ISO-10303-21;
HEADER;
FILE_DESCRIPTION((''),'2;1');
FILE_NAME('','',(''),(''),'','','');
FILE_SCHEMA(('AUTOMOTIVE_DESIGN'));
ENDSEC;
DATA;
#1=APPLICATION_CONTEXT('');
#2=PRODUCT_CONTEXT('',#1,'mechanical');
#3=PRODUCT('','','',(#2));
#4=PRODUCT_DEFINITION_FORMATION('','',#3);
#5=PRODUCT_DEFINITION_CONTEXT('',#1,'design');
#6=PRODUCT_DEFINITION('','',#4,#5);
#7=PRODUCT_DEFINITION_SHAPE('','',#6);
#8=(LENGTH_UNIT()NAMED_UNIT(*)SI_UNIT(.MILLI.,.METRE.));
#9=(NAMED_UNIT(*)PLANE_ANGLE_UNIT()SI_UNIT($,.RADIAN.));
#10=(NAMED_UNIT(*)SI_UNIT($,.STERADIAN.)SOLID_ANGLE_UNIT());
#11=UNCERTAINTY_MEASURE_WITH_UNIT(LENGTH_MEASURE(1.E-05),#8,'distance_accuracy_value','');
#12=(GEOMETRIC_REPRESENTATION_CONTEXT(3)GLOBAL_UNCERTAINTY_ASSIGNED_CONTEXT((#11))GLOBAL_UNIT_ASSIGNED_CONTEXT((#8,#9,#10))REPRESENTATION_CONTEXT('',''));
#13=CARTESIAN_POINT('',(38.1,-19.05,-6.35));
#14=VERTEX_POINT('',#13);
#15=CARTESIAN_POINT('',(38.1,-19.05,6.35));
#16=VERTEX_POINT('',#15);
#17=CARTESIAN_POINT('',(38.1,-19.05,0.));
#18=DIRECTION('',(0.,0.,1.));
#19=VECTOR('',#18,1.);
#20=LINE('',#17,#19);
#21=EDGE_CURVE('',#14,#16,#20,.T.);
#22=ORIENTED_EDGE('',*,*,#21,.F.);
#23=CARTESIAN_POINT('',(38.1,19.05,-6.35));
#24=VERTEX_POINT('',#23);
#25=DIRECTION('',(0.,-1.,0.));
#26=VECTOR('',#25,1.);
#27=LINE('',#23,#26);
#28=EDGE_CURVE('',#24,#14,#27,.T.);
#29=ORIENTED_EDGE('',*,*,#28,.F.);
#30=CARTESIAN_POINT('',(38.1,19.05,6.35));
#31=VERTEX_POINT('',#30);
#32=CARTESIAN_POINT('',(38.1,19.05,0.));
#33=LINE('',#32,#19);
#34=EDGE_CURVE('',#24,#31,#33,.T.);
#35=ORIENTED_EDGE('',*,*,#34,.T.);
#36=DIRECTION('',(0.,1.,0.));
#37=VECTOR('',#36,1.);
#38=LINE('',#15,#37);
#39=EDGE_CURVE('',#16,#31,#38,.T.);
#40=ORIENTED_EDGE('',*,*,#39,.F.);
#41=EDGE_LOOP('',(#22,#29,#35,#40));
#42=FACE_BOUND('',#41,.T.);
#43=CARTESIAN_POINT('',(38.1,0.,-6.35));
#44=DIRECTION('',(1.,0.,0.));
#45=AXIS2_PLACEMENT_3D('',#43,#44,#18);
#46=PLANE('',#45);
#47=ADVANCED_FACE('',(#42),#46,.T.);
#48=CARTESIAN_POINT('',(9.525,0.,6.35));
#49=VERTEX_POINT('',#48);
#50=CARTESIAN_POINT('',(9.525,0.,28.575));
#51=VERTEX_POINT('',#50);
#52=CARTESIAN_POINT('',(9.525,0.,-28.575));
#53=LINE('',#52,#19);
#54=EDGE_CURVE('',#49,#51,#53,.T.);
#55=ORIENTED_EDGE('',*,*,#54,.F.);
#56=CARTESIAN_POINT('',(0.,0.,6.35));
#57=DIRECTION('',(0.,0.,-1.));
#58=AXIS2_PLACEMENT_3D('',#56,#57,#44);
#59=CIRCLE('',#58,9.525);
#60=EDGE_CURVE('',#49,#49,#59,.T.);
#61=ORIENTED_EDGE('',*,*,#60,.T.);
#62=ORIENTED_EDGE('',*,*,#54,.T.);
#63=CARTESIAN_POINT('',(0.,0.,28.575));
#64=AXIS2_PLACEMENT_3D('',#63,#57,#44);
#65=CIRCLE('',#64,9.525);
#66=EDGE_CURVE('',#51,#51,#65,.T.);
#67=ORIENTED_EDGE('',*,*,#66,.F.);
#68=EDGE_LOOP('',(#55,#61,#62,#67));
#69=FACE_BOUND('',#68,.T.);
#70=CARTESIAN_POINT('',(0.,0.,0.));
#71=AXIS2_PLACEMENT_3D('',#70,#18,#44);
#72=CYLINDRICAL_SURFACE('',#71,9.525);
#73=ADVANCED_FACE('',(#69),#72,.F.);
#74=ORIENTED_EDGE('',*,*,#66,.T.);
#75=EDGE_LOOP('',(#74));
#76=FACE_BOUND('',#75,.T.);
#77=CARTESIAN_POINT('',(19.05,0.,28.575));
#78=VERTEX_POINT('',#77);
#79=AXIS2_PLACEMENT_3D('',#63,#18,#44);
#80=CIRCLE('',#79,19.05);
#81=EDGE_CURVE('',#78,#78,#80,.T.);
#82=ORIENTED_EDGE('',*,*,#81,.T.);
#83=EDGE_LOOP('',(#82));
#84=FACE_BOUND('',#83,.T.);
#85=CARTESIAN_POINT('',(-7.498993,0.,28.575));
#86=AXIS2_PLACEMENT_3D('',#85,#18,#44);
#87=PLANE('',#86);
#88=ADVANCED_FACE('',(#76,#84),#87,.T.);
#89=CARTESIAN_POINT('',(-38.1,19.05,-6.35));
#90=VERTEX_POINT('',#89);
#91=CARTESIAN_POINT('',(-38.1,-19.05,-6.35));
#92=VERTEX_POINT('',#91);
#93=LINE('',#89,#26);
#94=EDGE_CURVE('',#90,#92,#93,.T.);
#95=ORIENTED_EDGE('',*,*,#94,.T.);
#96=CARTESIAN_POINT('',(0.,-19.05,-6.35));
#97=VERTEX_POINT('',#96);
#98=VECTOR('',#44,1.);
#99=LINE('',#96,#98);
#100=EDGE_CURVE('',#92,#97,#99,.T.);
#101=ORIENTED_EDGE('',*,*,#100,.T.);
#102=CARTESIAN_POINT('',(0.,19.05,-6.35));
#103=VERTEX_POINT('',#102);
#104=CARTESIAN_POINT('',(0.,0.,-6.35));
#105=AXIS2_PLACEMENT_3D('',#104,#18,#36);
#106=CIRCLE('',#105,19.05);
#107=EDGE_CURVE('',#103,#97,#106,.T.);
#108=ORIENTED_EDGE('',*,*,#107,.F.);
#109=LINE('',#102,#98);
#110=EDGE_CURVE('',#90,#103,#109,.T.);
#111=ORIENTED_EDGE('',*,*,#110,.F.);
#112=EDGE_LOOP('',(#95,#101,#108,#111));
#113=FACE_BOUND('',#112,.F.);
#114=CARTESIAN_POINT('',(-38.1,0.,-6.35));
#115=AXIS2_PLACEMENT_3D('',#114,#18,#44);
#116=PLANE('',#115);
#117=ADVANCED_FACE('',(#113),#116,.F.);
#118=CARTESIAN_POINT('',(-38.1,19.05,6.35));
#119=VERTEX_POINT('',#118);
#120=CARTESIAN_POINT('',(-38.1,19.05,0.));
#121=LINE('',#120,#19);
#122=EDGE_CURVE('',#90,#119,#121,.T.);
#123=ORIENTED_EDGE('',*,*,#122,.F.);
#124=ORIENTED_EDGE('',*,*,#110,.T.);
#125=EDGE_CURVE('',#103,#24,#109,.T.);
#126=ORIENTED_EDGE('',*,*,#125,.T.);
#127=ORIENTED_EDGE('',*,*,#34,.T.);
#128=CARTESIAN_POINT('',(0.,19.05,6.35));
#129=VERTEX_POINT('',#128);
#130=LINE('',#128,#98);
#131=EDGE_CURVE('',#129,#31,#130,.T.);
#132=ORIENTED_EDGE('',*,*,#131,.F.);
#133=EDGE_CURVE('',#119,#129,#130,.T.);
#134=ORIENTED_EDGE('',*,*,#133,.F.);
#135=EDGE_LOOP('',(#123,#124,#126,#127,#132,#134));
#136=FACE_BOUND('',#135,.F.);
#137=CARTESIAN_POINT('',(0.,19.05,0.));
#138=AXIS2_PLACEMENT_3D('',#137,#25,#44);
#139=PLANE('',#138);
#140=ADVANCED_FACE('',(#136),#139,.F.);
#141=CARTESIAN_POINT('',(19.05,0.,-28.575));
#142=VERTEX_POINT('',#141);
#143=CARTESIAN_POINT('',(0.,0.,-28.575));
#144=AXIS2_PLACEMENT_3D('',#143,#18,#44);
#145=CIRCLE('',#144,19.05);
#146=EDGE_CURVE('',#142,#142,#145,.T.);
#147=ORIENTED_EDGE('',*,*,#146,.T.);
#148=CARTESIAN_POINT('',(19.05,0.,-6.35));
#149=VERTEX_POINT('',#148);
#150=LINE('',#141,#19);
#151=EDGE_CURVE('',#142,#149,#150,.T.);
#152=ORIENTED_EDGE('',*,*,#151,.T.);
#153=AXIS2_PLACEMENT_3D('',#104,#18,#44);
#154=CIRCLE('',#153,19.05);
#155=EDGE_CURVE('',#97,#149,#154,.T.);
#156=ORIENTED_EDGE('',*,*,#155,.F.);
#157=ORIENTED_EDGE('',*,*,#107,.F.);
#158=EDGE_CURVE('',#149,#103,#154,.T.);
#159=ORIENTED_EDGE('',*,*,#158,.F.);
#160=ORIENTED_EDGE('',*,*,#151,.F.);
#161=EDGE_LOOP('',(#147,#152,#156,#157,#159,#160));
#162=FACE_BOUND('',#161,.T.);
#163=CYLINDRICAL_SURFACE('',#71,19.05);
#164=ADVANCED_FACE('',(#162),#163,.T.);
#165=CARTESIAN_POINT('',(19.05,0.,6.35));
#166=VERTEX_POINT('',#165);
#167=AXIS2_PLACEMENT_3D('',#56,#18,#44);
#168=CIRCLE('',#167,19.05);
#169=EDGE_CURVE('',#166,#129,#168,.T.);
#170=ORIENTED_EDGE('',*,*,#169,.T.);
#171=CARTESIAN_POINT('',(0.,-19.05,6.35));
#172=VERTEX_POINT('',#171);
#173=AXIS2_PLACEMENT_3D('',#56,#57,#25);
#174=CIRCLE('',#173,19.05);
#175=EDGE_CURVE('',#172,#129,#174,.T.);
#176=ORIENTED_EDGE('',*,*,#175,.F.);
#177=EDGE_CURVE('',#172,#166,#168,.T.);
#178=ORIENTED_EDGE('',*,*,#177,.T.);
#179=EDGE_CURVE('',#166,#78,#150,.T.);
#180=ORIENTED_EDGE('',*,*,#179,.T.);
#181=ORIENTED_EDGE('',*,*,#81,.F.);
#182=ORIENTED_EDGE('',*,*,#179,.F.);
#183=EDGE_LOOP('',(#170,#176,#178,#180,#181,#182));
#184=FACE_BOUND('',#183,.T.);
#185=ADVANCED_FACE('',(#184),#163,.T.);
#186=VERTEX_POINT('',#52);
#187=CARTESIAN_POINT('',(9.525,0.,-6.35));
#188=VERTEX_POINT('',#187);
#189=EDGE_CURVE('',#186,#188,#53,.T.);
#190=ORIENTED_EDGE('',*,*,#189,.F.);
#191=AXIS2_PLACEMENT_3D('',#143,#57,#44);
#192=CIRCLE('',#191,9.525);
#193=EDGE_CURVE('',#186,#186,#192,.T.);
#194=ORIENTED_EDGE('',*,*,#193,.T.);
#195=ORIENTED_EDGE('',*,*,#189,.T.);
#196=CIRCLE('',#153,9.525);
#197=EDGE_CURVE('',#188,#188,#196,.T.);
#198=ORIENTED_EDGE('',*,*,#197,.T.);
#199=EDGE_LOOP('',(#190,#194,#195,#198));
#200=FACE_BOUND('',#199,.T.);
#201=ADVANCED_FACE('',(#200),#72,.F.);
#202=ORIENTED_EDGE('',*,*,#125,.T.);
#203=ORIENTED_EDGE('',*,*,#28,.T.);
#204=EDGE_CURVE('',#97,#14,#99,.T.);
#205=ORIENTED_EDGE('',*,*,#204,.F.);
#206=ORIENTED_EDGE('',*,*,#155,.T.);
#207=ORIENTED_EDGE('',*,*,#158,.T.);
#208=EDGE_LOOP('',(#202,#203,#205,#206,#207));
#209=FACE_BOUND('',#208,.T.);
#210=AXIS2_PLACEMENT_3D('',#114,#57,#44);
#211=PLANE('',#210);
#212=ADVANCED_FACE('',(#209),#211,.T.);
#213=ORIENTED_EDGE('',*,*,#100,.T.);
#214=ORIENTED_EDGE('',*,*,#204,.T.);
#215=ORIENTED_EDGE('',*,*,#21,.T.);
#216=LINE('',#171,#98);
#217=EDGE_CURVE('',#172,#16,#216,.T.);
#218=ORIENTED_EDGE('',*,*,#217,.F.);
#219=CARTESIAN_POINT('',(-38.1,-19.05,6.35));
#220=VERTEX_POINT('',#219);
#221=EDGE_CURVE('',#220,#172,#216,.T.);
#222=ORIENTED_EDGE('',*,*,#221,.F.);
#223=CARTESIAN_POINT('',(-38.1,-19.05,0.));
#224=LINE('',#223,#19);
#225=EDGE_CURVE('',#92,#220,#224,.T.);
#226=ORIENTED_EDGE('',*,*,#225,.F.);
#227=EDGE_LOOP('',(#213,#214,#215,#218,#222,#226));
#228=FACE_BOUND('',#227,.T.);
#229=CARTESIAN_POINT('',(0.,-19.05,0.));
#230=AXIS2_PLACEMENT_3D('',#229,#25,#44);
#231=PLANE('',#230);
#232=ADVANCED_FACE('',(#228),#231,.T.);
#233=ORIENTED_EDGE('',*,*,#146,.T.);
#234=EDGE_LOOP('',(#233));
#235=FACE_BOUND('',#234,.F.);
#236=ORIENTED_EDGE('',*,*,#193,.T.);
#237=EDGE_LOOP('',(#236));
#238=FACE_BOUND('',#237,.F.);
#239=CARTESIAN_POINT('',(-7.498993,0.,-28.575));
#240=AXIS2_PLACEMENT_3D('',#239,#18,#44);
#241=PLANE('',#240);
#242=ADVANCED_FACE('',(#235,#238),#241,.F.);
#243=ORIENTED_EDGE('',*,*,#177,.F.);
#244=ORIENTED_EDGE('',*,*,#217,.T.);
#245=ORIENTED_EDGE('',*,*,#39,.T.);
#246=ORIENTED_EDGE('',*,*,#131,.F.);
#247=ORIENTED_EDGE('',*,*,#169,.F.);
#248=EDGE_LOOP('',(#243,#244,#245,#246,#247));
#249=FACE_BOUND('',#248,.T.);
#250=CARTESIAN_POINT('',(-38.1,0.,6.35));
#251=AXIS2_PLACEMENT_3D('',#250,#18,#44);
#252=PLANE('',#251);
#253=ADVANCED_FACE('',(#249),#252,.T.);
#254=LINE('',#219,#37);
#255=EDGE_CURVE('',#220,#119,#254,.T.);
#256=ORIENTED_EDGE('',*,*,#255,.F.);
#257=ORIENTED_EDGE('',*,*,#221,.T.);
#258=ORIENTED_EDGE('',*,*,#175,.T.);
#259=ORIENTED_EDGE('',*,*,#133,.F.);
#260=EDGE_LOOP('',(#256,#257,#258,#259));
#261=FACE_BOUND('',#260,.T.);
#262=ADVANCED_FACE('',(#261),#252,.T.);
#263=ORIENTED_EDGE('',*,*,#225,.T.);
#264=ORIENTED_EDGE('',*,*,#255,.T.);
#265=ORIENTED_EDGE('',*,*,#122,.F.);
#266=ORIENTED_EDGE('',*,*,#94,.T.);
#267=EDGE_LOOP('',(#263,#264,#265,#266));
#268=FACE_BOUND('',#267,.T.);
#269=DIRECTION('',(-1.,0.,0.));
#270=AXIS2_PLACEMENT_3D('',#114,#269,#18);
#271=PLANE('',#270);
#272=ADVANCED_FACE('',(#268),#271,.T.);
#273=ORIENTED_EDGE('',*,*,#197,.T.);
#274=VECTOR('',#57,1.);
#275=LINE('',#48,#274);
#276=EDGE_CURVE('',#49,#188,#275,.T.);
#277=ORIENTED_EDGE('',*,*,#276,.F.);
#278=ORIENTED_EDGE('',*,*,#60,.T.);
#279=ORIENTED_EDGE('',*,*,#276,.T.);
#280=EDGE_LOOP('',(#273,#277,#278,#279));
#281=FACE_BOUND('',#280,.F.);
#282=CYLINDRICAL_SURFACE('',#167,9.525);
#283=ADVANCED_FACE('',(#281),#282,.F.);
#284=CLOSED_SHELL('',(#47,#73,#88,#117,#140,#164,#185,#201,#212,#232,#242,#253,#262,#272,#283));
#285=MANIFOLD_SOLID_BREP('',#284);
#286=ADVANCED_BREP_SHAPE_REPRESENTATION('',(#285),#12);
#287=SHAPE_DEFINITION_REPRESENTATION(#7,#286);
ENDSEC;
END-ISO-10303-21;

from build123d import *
from build123d import SkipClean  # not in build123d's __all__

# Parameters (mm, degrees)
F1_DEPTH      = 28.575
F2_W          = 76.2
F2_H          = 12.7
F3_DEPTH      = 19.05
F3_DEPTH_BACK = 19.05
F4_R          = 9.525
F5_DEPTH      = 34.926


with BuildPart() as f1:
    # F0 (on Top) → F1 (new body, symmetric)
    with BuildSketch(Plane.XY):
        with BuildLine():
            ThreePointArc((0, 19.05), (-19.05, 0), (0, -19.05))
            Line((0, -19.05), (0, -9.525))
            ThreePointArc((0, -9.525), (-9.525, 0), (0, 9.525))
            Line((0, 9.525), (0, 19.05))
        make_face()
        with BuildLine():
            Line((0, -9.525), (0, -19.05))
            ThreePointArc((0, -19.05), (13.4703841816, -13.4703841816), (19.05, 0))
            ThreePointArc((19.05, 0), (13.4703841816, 13.4703841816), (0, 19.05))
            Line((0, 19.05), (0, 9.525))
            ThreePointArc((0, 9.525), (6.7351920908, 6.7351920908), (9.525, 0))
            ThreePointArc((9.525, 0), (6.7351920908, -6.7351920908), (0, -9.525))
        make_face()
    extrude(amount=F1_DEPTH, both=True)

    # F2 (on Front) → F3 (join, two sides)
    with BuildSketch(Plane.XZ) as f3_sk:
        Rectangle(F2_W, F2_H)
    extrude(amount=-F3_DEPTH)
    extrude(f3_sk.sketch, amount=F3_DEPTH_BACK)

    # F4 (on face) → F5 (cut, through all)
    with BuildSketch(Plane.XY.offset(6.35)):
        Circle(F4_R)
    with SkipClean():  # cleaning this boolean's faces spoils the solid; the shape is the same uncleaned
        extrude(amount=-F5_DEPTH, mode=Mode.SUBTRACT)


solid = f1.part
